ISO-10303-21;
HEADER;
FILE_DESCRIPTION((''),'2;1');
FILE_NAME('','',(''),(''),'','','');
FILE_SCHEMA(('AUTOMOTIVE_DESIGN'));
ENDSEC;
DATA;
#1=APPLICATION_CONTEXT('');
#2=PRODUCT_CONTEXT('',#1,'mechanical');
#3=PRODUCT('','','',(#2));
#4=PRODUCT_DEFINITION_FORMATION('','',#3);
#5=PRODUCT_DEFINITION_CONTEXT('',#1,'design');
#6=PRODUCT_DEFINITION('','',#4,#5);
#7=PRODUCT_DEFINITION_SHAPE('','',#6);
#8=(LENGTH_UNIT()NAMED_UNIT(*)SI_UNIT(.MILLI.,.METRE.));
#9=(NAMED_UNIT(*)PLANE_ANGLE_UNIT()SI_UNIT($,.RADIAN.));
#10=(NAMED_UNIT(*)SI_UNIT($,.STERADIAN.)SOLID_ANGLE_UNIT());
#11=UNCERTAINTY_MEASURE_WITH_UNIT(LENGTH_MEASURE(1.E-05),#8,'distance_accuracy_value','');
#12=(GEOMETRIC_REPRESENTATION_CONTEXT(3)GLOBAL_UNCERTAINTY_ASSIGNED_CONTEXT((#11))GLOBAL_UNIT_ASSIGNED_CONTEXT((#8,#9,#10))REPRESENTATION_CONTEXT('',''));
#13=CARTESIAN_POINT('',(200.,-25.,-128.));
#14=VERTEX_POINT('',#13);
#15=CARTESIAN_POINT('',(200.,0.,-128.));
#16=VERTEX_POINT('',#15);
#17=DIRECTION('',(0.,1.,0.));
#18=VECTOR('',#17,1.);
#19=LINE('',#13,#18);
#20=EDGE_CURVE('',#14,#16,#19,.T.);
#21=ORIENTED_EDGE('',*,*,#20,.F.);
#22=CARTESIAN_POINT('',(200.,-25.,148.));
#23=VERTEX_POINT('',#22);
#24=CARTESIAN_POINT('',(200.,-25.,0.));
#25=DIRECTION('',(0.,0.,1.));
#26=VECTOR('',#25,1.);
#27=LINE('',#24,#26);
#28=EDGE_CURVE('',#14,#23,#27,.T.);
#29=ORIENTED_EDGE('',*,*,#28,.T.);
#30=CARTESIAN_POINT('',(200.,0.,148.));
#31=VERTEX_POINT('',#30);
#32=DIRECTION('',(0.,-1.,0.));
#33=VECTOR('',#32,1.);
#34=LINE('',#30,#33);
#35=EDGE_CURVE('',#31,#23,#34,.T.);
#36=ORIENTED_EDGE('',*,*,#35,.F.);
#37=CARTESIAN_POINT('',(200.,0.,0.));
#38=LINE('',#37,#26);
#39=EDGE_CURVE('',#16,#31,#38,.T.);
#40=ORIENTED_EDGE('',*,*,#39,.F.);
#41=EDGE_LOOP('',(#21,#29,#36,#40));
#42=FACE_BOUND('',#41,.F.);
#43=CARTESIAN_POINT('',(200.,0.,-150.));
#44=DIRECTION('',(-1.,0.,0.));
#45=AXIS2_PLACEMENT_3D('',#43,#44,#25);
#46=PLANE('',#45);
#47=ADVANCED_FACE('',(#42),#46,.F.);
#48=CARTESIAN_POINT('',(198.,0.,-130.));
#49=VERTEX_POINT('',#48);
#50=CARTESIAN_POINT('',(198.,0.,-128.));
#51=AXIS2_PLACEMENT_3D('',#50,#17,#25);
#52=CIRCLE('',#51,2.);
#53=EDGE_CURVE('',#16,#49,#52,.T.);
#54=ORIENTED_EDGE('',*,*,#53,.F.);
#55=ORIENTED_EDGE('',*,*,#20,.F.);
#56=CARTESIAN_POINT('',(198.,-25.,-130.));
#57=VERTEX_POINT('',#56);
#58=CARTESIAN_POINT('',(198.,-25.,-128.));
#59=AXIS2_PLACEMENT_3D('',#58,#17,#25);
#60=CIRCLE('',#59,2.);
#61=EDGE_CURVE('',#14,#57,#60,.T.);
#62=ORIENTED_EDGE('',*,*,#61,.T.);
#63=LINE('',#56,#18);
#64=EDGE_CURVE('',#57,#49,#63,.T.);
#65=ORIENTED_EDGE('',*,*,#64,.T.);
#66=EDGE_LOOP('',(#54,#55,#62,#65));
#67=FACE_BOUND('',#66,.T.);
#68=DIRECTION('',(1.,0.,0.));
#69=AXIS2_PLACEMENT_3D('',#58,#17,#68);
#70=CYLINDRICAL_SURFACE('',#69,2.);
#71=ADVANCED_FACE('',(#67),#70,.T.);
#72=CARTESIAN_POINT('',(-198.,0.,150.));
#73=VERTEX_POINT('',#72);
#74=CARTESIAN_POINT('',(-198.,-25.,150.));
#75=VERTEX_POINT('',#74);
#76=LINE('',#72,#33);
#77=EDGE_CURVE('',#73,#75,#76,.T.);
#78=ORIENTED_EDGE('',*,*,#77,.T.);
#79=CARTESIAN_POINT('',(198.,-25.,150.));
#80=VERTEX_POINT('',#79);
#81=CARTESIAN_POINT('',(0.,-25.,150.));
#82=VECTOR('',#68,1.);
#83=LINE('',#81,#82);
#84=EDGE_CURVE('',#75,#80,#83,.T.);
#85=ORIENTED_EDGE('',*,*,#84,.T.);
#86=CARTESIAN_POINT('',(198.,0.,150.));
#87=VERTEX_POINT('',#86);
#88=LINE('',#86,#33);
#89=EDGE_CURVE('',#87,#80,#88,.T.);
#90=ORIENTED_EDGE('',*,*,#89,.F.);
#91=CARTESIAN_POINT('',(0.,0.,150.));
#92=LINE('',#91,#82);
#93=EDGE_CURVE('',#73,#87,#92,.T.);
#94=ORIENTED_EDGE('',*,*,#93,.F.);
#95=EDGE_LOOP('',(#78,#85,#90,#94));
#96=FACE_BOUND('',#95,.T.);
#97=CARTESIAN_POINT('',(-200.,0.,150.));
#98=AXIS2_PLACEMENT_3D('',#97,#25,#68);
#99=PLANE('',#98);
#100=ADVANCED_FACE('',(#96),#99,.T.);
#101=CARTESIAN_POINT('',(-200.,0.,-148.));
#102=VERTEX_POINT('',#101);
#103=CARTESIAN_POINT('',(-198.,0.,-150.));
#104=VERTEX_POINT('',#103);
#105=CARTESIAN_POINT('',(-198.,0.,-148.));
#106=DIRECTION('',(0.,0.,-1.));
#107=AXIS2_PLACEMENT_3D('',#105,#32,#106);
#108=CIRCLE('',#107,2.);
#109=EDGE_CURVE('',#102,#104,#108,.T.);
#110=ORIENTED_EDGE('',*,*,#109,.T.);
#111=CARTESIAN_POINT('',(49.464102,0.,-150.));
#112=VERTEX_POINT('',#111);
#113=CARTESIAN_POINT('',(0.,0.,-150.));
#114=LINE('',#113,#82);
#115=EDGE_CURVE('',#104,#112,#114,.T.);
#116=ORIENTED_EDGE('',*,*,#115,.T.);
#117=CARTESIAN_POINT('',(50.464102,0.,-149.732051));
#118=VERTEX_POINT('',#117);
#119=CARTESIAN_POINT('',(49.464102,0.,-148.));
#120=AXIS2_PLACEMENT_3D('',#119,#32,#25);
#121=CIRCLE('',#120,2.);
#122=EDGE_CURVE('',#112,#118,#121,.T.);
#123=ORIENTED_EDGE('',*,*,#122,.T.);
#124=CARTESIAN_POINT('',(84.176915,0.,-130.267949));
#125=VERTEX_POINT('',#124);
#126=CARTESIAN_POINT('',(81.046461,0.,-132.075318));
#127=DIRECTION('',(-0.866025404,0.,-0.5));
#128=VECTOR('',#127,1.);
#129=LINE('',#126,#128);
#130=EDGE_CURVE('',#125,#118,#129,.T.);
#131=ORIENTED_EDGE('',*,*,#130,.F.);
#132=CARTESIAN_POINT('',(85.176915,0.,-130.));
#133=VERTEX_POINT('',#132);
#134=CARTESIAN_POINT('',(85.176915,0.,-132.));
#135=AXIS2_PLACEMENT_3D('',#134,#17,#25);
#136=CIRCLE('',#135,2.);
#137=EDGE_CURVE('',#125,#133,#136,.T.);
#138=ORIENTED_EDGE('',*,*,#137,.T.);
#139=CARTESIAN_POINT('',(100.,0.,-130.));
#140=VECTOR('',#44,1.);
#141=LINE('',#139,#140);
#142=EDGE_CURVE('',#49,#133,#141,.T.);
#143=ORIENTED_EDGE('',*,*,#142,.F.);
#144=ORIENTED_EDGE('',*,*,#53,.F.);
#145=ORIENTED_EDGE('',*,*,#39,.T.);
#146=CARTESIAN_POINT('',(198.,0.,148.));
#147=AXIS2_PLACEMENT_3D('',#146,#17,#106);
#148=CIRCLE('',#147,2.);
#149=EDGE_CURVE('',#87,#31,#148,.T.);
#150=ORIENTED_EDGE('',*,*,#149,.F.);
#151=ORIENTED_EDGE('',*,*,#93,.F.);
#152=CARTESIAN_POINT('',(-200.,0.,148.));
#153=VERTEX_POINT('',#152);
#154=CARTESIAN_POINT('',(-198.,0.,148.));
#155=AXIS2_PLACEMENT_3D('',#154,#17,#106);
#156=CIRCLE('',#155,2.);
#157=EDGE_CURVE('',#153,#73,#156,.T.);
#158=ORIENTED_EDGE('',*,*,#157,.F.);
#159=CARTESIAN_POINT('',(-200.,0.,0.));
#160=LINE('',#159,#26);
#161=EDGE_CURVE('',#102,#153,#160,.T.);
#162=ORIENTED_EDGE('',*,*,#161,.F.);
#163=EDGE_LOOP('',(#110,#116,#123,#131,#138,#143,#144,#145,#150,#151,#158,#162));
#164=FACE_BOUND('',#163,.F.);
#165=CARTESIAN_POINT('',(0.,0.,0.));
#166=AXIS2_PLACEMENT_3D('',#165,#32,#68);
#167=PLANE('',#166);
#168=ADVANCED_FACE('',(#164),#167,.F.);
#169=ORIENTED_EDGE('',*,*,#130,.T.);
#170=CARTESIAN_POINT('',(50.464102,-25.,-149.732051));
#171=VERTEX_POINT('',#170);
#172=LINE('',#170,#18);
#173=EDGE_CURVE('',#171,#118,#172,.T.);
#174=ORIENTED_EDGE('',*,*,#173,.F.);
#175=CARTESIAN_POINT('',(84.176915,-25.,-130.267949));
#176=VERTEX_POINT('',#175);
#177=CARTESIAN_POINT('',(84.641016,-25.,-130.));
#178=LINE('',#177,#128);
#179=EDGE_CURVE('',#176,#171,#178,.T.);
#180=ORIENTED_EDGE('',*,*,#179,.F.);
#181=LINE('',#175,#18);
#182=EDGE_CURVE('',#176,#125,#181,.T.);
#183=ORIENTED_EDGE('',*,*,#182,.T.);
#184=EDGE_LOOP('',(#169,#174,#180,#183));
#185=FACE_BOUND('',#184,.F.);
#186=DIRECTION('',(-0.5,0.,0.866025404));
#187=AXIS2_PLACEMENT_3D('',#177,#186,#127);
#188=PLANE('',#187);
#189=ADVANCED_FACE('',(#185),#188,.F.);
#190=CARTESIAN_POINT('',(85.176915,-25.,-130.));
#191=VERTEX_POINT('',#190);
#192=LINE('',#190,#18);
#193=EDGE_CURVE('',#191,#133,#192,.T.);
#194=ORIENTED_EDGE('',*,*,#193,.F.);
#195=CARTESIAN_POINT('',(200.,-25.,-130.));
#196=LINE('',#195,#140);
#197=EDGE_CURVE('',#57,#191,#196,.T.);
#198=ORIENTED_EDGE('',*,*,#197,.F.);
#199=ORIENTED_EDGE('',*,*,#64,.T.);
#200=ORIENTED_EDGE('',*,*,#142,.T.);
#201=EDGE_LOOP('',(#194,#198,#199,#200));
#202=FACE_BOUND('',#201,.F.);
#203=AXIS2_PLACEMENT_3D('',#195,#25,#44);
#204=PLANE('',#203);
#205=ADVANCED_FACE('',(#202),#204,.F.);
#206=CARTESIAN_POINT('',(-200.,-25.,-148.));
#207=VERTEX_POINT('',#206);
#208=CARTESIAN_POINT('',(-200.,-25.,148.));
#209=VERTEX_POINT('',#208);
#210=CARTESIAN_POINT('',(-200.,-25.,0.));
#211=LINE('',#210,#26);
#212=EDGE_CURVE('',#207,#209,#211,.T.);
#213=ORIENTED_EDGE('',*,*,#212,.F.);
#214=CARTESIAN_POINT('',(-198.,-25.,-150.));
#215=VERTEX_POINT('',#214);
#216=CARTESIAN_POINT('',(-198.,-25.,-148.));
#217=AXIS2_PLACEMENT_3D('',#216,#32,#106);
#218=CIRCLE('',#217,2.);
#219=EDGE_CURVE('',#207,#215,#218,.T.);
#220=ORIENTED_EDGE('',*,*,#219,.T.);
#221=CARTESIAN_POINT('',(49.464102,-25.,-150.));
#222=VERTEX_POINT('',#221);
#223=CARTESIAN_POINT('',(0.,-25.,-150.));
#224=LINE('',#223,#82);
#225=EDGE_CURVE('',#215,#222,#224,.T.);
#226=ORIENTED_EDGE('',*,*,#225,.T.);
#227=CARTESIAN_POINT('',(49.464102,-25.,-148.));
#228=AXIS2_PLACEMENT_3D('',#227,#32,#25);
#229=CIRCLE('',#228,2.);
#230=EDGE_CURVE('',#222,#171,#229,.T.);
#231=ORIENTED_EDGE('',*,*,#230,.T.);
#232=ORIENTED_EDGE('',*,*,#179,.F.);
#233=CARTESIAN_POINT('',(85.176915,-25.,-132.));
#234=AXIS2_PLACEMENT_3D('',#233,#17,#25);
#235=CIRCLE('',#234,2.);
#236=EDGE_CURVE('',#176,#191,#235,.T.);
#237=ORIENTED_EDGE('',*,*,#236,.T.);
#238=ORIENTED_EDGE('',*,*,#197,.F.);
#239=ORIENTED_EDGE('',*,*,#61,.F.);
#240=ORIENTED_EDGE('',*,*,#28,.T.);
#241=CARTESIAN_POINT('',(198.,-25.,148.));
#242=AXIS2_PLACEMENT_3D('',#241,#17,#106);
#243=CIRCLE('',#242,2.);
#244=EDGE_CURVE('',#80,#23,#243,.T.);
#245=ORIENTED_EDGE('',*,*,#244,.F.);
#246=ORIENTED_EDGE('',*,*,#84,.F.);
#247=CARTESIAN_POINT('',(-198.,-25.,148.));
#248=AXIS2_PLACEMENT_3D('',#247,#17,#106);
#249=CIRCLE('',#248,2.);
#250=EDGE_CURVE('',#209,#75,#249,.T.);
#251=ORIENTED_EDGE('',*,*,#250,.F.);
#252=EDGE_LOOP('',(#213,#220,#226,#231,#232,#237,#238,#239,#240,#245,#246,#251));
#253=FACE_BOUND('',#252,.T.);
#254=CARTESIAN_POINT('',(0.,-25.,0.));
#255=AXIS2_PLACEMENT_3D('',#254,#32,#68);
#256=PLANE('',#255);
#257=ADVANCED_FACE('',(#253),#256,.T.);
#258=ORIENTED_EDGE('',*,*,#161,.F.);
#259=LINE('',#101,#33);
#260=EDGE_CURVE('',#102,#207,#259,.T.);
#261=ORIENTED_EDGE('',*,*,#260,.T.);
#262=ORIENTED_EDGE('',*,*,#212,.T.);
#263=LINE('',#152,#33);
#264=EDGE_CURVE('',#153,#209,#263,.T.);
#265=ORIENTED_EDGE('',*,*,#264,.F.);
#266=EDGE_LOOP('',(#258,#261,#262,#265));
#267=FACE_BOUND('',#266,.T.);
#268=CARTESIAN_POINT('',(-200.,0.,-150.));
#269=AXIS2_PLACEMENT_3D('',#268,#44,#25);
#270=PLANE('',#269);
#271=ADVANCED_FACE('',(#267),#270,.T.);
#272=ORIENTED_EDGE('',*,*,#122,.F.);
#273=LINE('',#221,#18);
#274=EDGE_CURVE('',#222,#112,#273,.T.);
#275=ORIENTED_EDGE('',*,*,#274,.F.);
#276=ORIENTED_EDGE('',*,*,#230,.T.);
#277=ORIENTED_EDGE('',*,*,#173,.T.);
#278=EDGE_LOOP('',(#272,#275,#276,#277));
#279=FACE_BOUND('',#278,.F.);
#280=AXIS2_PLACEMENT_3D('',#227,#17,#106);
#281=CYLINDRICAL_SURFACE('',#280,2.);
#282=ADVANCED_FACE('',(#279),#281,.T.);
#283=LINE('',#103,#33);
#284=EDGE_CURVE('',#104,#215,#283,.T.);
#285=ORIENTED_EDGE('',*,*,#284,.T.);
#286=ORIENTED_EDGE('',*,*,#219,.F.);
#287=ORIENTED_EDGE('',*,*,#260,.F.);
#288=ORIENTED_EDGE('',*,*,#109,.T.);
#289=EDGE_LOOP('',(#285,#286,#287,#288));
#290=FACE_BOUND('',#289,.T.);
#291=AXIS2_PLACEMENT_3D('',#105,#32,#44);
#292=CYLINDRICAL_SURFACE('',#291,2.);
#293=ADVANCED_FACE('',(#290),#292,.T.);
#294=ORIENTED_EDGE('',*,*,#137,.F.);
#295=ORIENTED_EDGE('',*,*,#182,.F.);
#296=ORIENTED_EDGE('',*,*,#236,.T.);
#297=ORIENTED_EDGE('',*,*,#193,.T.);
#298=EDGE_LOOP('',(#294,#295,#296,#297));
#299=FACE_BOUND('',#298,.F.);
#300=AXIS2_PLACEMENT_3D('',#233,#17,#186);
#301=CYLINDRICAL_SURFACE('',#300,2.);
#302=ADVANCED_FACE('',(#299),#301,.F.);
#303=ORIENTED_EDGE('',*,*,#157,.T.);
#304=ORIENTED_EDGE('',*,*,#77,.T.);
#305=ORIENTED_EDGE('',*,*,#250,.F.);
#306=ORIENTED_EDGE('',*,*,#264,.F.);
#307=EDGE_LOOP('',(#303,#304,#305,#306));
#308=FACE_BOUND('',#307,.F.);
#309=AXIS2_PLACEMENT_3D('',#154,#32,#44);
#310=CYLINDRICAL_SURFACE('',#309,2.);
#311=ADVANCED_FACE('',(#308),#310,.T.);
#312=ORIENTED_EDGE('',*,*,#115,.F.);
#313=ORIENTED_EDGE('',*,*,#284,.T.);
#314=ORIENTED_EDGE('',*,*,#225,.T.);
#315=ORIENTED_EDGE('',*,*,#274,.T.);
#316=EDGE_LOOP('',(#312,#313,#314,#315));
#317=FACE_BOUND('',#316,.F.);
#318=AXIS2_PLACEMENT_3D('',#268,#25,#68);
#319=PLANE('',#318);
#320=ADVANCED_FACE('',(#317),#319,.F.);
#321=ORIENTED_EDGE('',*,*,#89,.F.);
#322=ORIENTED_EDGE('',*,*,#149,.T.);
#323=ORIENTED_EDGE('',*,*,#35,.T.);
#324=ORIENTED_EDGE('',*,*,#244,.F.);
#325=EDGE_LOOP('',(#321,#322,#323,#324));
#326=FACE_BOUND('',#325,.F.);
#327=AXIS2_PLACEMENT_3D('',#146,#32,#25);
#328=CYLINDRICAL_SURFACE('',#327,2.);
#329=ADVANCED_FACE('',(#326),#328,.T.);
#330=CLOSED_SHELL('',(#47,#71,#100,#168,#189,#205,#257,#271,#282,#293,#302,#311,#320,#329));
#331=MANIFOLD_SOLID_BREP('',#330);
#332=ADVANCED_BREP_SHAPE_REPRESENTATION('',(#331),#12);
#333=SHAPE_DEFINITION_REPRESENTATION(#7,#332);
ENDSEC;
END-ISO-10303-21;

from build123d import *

# Parameters (mm, degrees)
F0_W     = 400
F0_H     = 300
F1_DEPTH = 25
F3_DEPTH = 25.001
F4_R     = 2


with BuildPart() as f1:
    # F0 (on Front) → F1 (new body)
    with BuildSketch(Plane.XZ):
        Rectangle(F0_W, F0_H)
    extrude(amount=F1_DEPTH)

    # F2 (on face) → F3 (cut, through all)
    with BuildSketch(Plane.XZ.offset(25)):
        Polygon((84.6410161514, -130), (50, -150), (200, -150), (200, -130), align=None)
    extrude(amount=-F3_DEPTH, mode=Mode.SUBTRACT)

    # F4
    f4_edges = [f1.edges().sort_by_distance(p)[0] for p in [
        (200, -12.5, 150),
        (200, -12.5, -130),
        (-200, -12.5, -150),
        (-200, -12.5, 150),
        (50, -12.5, -150),
        (84.641016, -12.5, -130),
    ]]
    fillet(f4_edges, radius=F4_R)


solid = f1.part
